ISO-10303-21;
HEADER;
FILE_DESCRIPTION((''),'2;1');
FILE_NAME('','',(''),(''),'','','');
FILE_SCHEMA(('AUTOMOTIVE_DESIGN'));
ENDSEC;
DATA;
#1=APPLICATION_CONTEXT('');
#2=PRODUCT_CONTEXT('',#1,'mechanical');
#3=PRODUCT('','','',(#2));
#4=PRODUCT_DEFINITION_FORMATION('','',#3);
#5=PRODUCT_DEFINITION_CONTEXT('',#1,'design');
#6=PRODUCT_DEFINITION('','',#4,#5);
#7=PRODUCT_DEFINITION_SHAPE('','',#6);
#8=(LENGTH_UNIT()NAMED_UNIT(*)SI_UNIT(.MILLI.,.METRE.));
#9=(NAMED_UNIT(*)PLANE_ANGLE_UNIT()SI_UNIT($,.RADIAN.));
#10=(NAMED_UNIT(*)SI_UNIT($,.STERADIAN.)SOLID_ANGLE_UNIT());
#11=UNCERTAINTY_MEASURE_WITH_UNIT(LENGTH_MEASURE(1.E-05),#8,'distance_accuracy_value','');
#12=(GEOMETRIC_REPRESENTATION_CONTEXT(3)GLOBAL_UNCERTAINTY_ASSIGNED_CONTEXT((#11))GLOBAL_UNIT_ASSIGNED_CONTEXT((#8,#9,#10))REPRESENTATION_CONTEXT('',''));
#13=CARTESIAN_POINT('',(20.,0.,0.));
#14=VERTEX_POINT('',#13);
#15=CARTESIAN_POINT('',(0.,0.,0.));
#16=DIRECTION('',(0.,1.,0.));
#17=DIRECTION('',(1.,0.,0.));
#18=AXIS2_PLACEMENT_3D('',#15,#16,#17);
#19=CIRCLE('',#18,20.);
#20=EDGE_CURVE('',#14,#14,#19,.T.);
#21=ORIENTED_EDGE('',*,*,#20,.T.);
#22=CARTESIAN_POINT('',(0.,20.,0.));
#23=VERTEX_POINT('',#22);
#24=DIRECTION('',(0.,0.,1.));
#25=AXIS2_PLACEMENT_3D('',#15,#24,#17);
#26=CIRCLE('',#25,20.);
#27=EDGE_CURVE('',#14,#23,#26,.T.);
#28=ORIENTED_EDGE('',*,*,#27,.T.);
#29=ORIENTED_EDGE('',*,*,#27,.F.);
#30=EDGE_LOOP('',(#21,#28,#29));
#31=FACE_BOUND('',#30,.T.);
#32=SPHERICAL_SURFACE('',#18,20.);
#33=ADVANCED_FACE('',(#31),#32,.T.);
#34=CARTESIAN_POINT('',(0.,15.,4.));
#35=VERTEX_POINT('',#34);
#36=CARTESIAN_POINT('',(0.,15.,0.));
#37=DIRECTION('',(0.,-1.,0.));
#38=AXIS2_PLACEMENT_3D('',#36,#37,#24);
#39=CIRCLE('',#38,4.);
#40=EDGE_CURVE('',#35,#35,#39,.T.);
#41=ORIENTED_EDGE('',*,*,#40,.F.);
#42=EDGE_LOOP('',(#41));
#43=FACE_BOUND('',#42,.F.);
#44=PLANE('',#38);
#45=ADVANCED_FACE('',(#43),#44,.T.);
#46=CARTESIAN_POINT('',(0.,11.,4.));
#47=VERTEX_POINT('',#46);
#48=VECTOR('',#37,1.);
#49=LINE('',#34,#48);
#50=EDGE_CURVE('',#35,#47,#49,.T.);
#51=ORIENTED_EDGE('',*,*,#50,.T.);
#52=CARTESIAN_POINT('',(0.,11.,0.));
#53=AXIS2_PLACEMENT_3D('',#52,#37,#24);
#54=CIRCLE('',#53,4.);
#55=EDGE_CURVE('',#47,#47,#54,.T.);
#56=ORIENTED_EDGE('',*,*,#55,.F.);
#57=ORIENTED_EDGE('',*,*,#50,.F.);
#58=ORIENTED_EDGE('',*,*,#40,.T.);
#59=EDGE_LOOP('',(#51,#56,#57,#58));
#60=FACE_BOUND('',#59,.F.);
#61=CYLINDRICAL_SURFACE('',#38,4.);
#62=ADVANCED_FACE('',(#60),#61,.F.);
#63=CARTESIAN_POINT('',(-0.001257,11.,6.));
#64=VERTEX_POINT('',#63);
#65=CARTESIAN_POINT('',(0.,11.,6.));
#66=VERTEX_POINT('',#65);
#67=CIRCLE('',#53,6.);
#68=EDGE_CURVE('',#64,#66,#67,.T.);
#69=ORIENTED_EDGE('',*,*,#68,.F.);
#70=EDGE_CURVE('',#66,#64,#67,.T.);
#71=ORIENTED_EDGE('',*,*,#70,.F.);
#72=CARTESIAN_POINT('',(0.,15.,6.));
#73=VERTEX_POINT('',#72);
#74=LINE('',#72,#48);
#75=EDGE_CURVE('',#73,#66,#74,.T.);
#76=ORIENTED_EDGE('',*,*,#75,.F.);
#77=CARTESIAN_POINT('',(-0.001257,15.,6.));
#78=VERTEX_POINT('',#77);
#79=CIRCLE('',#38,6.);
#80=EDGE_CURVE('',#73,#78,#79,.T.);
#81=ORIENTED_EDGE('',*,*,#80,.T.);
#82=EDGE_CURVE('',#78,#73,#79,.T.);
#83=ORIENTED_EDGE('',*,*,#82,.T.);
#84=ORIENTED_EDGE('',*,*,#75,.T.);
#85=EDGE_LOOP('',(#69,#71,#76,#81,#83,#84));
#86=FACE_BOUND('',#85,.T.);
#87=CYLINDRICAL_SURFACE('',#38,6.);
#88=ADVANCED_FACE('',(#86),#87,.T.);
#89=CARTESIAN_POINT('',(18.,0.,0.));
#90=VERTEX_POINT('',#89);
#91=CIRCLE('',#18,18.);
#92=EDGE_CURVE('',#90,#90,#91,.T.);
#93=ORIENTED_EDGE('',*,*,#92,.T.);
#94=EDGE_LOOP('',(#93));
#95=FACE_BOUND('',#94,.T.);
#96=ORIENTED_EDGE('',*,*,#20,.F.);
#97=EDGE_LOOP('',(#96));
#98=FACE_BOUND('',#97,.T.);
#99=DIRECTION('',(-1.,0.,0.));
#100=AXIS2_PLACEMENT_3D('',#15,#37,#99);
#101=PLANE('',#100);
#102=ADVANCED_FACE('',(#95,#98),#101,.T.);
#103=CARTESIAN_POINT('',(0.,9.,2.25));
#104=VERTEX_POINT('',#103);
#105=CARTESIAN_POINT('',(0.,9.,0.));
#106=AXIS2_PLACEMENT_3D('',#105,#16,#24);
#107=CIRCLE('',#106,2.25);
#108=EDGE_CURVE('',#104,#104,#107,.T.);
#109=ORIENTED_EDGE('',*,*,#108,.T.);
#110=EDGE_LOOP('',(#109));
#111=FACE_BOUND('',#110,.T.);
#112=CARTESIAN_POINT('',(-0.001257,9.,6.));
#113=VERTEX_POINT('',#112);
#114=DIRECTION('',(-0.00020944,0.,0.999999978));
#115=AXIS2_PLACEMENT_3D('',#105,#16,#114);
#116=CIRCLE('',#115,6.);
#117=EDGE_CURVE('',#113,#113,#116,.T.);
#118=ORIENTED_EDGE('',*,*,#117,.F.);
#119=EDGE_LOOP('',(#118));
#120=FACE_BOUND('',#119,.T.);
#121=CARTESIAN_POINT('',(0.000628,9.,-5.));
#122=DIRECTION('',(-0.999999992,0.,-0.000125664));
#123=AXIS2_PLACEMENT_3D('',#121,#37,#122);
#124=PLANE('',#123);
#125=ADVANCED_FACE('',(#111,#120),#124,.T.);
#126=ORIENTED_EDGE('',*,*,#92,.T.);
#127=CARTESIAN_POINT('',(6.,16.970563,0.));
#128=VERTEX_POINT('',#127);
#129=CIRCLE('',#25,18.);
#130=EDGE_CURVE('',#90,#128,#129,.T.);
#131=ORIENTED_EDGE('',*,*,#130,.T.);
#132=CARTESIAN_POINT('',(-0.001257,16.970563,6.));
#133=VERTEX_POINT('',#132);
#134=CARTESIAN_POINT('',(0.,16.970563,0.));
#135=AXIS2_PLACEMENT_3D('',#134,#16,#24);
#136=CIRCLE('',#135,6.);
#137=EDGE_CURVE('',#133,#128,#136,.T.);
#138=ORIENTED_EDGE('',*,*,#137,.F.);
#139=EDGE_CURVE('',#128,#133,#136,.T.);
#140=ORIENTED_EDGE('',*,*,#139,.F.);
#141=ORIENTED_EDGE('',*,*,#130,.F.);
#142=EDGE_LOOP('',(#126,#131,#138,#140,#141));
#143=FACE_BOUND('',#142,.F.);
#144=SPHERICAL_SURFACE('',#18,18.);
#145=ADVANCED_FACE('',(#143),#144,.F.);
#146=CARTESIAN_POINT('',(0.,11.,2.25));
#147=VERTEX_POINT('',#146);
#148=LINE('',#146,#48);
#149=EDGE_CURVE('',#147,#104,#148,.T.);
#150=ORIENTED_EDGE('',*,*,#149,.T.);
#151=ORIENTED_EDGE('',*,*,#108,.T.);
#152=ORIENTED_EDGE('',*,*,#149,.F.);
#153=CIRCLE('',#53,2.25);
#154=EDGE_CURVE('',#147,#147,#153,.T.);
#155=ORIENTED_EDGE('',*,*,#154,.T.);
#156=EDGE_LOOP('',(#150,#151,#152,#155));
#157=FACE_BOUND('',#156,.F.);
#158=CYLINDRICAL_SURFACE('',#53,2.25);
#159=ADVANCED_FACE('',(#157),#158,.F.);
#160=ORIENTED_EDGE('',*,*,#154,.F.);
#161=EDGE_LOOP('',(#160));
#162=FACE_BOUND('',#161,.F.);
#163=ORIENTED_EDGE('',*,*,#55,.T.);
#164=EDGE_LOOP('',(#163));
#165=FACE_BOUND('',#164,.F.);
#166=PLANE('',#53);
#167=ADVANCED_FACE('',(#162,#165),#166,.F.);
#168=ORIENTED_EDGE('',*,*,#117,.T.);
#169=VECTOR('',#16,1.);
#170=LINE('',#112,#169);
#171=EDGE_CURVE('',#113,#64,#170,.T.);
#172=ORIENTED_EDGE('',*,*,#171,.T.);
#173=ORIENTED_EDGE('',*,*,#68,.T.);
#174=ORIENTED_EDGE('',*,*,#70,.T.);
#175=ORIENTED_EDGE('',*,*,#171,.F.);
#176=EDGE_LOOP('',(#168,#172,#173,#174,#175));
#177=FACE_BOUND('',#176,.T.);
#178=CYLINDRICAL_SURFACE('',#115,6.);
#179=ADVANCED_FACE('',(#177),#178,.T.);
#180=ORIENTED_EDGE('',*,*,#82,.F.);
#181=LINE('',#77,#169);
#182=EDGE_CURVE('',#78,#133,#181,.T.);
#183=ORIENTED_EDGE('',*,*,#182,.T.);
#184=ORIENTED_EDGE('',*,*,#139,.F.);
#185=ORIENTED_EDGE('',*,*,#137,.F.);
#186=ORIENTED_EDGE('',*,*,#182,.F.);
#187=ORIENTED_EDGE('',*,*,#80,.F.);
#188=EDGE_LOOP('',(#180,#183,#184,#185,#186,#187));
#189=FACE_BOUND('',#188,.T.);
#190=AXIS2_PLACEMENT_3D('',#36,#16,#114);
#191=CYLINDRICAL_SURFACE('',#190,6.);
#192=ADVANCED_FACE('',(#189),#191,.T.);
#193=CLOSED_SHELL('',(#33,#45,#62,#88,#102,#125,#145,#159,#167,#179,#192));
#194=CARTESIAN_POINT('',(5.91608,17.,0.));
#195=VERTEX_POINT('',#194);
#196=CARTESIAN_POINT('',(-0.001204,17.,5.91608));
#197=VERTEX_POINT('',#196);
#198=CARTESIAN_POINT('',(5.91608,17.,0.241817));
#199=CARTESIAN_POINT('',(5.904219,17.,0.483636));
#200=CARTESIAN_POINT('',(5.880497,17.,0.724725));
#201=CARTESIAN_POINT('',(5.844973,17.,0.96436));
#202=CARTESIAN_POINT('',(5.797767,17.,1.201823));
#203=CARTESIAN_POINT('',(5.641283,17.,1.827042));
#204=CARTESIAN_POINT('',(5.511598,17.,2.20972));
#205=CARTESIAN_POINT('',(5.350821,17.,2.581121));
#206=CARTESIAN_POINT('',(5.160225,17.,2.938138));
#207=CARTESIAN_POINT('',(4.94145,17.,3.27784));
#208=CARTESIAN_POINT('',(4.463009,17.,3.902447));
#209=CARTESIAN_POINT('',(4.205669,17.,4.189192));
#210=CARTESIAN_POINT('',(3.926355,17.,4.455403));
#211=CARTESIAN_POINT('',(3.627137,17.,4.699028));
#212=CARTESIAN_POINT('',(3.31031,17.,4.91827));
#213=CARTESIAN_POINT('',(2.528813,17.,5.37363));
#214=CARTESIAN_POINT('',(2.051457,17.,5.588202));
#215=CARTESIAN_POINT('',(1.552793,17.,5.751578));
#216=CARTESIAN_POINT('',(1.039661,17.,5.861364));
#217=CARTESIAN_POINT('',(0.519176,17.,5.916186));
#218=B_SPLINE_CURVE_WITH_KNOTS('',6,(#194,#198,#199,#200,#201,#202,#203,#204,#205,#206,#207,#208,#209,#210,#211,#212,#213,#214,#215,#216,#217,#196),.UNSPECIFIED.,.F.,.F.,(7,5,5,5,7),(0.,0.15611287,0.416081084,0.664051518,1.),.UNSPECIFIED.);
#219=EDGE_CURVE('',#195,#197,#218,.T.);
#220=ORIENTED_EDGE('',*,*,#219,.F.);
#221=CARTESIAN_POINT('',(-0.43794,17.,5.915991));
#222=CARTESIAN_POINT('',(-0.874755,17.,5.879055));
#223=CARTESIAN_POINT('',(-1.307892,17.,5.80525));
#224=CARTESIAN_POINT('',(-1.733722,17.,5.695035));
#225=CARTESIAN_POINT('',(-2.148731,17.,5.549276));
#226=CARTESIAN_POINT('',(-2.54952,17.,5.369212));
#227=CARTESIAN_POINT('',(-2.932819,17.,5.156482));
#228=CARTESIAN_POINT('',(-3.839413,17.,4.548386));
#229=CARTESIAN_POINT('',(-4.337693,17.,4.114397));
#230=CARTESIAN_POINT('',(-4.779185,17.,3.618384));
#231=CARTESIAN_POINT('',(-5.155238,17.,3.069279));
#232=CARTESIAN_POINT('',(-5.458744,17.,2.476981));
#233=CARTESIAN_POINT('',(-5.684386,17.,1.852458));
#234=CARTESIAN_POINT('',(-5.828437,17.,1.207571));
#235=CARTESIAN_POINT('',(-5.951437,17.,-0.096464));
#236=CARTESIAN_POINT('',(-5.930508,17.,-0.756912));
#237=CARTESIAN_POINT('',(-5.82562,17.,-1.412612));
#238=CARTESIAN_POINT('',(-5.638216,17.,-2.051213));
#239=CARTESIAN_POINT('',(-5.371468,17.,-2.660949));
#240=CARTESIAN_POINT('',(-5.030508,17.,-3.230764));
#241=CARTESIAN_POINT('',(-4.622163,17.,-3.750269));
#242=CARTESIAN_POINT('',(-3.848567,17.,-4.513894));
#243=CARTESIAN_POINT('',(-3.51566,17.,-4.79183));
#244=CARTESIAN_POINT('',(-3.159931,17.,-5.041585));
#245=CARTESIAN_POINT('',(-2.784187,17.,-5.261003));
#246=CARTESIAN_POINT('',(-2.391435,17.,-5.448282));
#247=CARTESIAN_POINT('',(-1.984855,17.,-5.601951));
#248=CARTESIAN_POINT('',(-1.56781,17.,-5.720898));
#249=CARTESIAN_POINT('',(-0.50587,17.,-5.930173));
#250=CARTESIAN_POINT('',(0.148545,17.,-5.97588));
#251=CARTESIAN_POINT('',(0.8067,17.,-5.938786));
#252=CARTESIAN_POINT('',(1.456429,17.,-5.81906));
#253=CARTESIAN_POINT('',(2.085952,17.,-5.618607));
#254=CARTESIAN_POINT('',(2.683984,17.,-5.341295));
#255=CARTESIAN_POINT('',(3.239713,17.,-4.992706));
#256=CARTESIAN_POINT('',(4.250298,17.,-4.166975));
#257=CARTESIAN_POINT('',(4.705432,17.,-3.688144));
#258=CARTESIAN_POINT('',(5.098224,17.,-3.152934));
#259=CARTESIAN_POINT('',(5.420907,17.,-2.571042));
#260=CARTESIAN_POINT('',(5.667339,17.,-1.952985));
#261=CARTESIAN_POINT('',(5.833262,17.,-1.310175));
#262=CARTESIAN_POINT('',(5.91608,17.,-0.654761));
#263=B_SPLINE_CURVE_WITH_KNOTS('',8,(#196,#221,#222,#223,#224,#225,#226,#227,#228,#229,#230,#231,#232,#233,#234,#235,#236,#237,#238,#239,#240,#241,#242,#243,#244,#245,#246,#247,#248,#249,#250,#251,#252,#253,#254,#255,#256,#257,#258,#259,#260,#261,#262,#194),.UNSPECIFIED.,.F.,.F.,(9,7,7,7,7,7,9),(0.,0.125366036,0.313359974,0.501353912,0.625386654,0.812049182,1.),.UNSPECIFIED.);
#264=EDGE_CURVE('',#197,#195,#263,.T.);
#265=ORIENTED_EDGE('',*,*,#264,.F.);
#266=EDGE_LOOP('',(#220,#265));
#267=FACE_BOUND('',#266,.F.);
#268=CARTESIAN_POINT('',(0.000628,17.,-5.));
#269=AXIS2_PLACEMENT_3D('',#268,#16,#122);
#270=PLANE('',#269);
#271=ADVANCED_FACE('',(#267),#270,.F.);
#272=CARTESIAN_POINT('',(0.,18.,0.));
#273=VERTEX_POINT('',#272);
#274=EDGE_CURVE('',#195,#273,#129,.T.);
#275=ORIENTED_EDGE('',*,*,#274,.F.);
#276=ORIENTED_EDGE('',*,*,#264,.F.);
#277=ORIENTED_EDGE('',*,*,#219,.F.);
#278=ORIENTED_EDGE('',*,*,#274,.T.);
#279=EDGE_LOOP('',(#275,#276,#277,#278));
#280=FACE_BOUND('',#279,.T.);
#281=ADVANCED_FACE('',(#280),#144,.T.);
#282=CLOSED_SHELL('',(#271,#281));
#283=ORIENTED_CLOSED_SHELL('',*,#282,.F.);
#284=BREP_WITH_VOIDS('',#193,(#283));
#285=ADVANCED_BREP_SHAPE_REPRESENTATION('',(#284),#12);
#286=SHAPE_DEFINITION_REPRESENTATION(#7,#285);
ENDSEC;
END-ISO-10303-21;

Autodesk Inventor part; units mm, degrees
ref_plane "YZ Plane" through (0, 0, 0) normal (1, 0, 0) x (0, 1, 0)
ref_plane "XY Plane" through (0, 0, 0) normal (0, 0, 1) x (1, 0, 0)
ref_plane "Work Plane1" through (0, 15, 0) normal (0, 1, 0) x (-1, 0, 0)
sketch "Sketch1" plane through (0, 0, 0) normal (0, 0, 1) x (1, 0, 0)
  line L0 (0, 0) -> (0, 20)
  line L1 (0, 0) -> (20, 0)
  arc A0 (20, 0) -> (0, 20) centre (0, 0) ccw
  line L2 (0, -4.8284) -> (0, 28.9706) projected
  dimension "d2" = 20
revolve "Revolution1" add sketch "Sketch1" angle 360 about axis through (0, -10, 0) along (0, 1, 0)
sketch "Sketch2" plane through (0, 15, 0) normal (0, 1, 0) x (-1, 0, 0)
  point P0 (0, 0)
  point P1 (0, 0)
hole "Hole1" at (0, 15, 0) direction (0, -1, 0) diameter 4.5 end through all counterbore diameter 8 counterbore depth 4 clearance for "Socket Head Cap Screw" size "M4" standard "Ansi Metric M Profile"
shell "Shell1" thickness 2 removed faces 1 at (13.8841, 0, 1.6858)
sketch "Sketch3" plane through (0, 0, 0) normal (0, -1, 0) x (1, 0, 0)
  circle A0 centre (0, 0) radius 4.25 projected
  circle A1 centre (0, 0) radius 2.25 projected
extrude "Extrusion1" cut sketch "Sketch3" against normal blind 9
properties part number "Ball_Upper Half" material "Nylon 6/6"
